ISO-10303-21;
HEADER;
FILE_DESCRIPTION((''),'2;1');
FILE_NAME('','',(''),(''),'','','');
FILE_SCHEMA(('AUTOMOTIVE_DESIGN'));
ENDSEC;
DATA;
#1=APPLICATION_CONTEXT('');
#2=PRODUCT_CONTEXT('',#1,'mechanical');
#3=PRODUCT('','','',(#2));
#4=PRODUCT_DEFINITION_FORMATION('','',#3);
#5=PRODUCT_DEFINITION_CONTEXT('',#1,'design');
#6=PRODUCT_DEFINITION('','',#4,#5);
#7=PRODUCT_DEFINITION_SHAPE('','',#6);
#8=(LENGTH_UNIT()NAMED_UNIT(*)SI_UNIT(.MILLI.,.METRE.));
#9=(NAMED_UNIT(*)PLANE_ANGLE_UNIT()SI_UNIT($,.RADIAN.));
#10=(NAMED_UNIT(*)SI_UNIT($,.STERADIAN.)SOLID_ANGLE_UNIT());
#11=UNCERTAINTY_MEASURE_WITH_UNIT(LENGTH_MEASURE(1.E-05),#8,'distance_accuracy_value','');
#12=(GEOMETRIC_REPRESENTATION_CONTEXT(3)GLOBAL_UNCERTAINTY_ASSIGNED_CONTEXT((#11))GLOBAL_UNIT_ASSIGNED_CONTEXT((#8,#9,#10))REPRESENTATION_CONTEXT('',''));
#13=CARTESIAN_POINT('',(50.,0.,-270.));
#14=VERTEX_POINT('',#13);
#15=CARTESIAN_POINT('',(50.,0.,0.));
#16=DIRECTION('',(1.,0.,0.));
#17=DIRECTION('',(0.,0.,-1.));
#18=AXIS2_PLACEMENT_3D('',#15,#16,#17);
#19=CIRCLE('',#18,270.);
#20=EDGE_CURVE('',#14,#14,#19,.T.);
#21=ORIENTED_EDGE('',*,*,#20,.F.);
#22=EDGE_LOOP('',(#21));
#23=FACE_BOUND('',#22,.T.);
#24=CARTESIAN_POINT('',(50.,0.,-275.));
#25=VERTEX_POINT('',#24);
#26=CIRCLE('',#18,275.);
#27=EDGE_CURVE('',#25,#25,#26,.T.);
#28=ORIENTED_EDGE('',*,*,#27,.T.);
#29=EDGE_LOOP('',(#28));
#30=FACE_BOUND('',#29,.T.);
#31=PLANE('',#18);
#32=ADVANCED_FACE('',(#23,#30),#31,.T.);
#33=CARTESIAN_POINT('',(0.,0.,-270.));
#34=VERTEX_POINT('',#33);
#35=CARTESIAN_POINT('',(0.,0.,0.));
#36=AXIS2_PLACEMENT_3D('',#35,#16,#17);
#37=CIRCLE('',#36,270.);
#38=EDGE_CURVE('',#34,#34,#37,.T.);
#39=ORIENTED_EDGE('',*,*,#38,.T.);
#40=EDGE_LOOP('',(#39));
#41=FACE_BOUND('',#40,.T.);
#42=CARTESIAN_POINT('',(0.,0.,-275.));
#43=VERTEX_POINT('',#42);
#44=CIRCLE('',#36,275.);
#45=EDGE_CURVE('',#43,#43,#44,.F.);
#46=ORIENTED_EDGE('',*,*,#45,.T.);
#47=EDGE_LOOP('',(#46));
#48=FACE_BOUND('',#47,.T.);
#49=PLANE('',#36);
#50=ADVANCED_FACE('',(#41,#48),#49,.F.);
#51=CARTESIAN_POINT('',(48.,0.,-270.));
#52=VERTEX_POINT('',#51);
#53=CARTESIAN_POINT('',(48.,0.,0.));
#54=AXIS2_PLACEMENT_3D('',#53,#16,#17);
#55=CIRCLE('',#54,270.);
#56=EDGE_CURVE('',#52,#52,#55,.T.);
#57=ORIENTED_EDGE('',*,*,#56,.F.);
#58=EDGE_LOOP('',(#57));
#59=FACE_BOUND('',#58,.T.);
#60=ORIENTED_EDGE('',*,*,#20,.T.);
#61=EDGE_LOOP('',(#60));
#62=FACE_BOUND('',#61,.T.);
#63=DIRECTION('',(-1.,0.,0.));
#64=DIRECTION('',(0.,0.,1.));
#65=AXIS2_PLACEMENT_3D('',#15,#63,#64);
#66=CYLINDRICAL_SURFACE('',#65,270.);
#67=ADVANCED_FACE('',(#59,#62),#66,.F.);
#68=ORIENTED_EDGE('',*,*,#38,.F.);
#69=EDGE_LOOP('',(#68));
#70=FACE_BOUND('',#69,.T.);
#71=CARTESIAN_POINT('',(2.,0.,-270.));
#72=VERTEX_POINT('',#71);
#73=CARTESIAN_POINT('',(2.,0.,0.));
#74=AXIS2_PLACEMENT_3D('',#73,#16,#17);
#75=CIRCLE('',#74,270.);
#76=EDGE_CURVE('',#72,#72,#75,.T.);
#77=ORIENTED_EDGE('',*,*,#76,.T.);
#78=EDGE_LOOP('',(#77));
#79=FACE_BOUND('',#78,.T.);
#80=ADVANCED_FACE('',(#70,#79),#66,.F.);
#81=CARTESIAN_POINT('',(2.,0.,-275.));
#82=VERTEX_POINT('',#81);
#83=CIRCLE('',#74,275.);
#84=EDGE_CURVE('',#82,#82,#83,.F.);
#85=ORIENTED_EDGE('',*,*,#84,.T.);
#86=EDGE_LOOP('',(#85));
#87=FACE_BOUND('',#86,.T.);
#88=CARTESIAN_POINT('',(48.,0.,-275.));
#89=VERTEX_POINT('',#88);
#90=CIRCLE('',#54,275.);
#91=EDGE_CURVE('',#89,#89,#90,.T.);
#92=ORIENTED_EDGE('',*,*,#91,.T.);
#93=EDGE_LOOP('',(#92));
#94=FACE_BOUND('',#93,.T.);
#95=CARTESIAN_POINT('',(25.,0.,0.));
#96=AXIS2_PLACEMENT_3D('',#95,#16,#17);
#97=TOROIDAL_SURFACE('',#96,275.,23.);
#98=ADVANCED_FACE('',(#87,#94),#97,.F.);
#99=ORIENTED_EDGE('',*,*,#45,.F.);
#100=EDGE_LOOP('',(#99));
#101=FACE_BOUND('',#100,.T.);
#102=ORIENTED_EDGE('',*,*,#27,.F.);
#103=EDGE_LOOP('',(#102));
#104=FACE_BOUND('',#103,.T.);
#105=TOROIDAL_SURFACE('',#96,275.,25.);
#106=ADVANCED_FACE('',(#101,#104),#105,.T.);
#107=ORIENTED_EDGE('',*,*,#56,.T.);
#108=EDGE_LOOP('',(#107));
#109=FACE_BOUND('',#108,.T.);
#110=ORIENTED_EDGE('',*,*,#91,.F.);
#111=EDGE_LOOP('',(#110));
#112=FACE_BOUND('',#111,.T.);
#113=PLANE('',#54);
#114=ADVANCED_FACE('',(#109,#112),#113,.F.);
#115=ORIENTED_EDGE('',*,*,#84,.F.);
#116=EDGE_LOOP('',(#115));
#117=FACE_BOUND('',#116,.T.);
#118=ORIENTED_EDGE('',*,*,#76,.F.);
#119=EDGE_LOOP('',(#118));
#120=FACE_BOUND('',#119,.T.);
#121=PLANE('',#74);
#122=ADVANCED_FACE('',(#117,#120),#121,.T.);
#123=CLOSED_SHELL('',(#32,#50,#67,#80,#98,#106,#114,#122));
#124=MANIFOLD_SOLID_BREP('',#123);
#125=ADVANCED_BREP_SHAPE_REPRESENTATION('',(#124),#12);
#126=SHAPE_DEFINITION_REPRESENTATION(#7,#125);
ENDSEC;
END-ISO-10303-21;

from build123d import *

# Parameters (mm, degrees)
SKETCH1_R           = 300
SKETCH1_R_2         = 270
BOSS_EXTRUDE1_DEPTH = 50
FILLET1_R           = 25
SHELL1_T            = -2


with BuildPart() as part:
    # Sketch1 → Boss-Extrude1 (new body)
    with BuildSketch(Plane(origin=(0, 0, 0), x_dir=(0, 0, -1), z_dir=(1, 0, 0))):
        Circle(SKETCH1_R)
        Circle(SKETCH1_R_2, mode=Mode.SUBTRACT)
    extrude(amount=BOSS_EXTRUDE1_DEPTH)

    # Fillet1
    fillet1_edges = [part.edges().sort_by_distance(p)[0] for p in [
        (0, 0, 300),
        (50, 0, 300),
    ]]
    fillet(fillet1_edges, radius=FILLET1_R - 0.0001)  # a hair under: the kernel refuses the full size

    # Shell1
    shell1_openings = [part.faces().sort_by_distance(p)[0] for p in [
        (25, 0, 270),
    ]]
    offset(amount=SHELL1_T, openings=shell1_openings, kind=Kind.INTERSECTION)


solid = part.part
